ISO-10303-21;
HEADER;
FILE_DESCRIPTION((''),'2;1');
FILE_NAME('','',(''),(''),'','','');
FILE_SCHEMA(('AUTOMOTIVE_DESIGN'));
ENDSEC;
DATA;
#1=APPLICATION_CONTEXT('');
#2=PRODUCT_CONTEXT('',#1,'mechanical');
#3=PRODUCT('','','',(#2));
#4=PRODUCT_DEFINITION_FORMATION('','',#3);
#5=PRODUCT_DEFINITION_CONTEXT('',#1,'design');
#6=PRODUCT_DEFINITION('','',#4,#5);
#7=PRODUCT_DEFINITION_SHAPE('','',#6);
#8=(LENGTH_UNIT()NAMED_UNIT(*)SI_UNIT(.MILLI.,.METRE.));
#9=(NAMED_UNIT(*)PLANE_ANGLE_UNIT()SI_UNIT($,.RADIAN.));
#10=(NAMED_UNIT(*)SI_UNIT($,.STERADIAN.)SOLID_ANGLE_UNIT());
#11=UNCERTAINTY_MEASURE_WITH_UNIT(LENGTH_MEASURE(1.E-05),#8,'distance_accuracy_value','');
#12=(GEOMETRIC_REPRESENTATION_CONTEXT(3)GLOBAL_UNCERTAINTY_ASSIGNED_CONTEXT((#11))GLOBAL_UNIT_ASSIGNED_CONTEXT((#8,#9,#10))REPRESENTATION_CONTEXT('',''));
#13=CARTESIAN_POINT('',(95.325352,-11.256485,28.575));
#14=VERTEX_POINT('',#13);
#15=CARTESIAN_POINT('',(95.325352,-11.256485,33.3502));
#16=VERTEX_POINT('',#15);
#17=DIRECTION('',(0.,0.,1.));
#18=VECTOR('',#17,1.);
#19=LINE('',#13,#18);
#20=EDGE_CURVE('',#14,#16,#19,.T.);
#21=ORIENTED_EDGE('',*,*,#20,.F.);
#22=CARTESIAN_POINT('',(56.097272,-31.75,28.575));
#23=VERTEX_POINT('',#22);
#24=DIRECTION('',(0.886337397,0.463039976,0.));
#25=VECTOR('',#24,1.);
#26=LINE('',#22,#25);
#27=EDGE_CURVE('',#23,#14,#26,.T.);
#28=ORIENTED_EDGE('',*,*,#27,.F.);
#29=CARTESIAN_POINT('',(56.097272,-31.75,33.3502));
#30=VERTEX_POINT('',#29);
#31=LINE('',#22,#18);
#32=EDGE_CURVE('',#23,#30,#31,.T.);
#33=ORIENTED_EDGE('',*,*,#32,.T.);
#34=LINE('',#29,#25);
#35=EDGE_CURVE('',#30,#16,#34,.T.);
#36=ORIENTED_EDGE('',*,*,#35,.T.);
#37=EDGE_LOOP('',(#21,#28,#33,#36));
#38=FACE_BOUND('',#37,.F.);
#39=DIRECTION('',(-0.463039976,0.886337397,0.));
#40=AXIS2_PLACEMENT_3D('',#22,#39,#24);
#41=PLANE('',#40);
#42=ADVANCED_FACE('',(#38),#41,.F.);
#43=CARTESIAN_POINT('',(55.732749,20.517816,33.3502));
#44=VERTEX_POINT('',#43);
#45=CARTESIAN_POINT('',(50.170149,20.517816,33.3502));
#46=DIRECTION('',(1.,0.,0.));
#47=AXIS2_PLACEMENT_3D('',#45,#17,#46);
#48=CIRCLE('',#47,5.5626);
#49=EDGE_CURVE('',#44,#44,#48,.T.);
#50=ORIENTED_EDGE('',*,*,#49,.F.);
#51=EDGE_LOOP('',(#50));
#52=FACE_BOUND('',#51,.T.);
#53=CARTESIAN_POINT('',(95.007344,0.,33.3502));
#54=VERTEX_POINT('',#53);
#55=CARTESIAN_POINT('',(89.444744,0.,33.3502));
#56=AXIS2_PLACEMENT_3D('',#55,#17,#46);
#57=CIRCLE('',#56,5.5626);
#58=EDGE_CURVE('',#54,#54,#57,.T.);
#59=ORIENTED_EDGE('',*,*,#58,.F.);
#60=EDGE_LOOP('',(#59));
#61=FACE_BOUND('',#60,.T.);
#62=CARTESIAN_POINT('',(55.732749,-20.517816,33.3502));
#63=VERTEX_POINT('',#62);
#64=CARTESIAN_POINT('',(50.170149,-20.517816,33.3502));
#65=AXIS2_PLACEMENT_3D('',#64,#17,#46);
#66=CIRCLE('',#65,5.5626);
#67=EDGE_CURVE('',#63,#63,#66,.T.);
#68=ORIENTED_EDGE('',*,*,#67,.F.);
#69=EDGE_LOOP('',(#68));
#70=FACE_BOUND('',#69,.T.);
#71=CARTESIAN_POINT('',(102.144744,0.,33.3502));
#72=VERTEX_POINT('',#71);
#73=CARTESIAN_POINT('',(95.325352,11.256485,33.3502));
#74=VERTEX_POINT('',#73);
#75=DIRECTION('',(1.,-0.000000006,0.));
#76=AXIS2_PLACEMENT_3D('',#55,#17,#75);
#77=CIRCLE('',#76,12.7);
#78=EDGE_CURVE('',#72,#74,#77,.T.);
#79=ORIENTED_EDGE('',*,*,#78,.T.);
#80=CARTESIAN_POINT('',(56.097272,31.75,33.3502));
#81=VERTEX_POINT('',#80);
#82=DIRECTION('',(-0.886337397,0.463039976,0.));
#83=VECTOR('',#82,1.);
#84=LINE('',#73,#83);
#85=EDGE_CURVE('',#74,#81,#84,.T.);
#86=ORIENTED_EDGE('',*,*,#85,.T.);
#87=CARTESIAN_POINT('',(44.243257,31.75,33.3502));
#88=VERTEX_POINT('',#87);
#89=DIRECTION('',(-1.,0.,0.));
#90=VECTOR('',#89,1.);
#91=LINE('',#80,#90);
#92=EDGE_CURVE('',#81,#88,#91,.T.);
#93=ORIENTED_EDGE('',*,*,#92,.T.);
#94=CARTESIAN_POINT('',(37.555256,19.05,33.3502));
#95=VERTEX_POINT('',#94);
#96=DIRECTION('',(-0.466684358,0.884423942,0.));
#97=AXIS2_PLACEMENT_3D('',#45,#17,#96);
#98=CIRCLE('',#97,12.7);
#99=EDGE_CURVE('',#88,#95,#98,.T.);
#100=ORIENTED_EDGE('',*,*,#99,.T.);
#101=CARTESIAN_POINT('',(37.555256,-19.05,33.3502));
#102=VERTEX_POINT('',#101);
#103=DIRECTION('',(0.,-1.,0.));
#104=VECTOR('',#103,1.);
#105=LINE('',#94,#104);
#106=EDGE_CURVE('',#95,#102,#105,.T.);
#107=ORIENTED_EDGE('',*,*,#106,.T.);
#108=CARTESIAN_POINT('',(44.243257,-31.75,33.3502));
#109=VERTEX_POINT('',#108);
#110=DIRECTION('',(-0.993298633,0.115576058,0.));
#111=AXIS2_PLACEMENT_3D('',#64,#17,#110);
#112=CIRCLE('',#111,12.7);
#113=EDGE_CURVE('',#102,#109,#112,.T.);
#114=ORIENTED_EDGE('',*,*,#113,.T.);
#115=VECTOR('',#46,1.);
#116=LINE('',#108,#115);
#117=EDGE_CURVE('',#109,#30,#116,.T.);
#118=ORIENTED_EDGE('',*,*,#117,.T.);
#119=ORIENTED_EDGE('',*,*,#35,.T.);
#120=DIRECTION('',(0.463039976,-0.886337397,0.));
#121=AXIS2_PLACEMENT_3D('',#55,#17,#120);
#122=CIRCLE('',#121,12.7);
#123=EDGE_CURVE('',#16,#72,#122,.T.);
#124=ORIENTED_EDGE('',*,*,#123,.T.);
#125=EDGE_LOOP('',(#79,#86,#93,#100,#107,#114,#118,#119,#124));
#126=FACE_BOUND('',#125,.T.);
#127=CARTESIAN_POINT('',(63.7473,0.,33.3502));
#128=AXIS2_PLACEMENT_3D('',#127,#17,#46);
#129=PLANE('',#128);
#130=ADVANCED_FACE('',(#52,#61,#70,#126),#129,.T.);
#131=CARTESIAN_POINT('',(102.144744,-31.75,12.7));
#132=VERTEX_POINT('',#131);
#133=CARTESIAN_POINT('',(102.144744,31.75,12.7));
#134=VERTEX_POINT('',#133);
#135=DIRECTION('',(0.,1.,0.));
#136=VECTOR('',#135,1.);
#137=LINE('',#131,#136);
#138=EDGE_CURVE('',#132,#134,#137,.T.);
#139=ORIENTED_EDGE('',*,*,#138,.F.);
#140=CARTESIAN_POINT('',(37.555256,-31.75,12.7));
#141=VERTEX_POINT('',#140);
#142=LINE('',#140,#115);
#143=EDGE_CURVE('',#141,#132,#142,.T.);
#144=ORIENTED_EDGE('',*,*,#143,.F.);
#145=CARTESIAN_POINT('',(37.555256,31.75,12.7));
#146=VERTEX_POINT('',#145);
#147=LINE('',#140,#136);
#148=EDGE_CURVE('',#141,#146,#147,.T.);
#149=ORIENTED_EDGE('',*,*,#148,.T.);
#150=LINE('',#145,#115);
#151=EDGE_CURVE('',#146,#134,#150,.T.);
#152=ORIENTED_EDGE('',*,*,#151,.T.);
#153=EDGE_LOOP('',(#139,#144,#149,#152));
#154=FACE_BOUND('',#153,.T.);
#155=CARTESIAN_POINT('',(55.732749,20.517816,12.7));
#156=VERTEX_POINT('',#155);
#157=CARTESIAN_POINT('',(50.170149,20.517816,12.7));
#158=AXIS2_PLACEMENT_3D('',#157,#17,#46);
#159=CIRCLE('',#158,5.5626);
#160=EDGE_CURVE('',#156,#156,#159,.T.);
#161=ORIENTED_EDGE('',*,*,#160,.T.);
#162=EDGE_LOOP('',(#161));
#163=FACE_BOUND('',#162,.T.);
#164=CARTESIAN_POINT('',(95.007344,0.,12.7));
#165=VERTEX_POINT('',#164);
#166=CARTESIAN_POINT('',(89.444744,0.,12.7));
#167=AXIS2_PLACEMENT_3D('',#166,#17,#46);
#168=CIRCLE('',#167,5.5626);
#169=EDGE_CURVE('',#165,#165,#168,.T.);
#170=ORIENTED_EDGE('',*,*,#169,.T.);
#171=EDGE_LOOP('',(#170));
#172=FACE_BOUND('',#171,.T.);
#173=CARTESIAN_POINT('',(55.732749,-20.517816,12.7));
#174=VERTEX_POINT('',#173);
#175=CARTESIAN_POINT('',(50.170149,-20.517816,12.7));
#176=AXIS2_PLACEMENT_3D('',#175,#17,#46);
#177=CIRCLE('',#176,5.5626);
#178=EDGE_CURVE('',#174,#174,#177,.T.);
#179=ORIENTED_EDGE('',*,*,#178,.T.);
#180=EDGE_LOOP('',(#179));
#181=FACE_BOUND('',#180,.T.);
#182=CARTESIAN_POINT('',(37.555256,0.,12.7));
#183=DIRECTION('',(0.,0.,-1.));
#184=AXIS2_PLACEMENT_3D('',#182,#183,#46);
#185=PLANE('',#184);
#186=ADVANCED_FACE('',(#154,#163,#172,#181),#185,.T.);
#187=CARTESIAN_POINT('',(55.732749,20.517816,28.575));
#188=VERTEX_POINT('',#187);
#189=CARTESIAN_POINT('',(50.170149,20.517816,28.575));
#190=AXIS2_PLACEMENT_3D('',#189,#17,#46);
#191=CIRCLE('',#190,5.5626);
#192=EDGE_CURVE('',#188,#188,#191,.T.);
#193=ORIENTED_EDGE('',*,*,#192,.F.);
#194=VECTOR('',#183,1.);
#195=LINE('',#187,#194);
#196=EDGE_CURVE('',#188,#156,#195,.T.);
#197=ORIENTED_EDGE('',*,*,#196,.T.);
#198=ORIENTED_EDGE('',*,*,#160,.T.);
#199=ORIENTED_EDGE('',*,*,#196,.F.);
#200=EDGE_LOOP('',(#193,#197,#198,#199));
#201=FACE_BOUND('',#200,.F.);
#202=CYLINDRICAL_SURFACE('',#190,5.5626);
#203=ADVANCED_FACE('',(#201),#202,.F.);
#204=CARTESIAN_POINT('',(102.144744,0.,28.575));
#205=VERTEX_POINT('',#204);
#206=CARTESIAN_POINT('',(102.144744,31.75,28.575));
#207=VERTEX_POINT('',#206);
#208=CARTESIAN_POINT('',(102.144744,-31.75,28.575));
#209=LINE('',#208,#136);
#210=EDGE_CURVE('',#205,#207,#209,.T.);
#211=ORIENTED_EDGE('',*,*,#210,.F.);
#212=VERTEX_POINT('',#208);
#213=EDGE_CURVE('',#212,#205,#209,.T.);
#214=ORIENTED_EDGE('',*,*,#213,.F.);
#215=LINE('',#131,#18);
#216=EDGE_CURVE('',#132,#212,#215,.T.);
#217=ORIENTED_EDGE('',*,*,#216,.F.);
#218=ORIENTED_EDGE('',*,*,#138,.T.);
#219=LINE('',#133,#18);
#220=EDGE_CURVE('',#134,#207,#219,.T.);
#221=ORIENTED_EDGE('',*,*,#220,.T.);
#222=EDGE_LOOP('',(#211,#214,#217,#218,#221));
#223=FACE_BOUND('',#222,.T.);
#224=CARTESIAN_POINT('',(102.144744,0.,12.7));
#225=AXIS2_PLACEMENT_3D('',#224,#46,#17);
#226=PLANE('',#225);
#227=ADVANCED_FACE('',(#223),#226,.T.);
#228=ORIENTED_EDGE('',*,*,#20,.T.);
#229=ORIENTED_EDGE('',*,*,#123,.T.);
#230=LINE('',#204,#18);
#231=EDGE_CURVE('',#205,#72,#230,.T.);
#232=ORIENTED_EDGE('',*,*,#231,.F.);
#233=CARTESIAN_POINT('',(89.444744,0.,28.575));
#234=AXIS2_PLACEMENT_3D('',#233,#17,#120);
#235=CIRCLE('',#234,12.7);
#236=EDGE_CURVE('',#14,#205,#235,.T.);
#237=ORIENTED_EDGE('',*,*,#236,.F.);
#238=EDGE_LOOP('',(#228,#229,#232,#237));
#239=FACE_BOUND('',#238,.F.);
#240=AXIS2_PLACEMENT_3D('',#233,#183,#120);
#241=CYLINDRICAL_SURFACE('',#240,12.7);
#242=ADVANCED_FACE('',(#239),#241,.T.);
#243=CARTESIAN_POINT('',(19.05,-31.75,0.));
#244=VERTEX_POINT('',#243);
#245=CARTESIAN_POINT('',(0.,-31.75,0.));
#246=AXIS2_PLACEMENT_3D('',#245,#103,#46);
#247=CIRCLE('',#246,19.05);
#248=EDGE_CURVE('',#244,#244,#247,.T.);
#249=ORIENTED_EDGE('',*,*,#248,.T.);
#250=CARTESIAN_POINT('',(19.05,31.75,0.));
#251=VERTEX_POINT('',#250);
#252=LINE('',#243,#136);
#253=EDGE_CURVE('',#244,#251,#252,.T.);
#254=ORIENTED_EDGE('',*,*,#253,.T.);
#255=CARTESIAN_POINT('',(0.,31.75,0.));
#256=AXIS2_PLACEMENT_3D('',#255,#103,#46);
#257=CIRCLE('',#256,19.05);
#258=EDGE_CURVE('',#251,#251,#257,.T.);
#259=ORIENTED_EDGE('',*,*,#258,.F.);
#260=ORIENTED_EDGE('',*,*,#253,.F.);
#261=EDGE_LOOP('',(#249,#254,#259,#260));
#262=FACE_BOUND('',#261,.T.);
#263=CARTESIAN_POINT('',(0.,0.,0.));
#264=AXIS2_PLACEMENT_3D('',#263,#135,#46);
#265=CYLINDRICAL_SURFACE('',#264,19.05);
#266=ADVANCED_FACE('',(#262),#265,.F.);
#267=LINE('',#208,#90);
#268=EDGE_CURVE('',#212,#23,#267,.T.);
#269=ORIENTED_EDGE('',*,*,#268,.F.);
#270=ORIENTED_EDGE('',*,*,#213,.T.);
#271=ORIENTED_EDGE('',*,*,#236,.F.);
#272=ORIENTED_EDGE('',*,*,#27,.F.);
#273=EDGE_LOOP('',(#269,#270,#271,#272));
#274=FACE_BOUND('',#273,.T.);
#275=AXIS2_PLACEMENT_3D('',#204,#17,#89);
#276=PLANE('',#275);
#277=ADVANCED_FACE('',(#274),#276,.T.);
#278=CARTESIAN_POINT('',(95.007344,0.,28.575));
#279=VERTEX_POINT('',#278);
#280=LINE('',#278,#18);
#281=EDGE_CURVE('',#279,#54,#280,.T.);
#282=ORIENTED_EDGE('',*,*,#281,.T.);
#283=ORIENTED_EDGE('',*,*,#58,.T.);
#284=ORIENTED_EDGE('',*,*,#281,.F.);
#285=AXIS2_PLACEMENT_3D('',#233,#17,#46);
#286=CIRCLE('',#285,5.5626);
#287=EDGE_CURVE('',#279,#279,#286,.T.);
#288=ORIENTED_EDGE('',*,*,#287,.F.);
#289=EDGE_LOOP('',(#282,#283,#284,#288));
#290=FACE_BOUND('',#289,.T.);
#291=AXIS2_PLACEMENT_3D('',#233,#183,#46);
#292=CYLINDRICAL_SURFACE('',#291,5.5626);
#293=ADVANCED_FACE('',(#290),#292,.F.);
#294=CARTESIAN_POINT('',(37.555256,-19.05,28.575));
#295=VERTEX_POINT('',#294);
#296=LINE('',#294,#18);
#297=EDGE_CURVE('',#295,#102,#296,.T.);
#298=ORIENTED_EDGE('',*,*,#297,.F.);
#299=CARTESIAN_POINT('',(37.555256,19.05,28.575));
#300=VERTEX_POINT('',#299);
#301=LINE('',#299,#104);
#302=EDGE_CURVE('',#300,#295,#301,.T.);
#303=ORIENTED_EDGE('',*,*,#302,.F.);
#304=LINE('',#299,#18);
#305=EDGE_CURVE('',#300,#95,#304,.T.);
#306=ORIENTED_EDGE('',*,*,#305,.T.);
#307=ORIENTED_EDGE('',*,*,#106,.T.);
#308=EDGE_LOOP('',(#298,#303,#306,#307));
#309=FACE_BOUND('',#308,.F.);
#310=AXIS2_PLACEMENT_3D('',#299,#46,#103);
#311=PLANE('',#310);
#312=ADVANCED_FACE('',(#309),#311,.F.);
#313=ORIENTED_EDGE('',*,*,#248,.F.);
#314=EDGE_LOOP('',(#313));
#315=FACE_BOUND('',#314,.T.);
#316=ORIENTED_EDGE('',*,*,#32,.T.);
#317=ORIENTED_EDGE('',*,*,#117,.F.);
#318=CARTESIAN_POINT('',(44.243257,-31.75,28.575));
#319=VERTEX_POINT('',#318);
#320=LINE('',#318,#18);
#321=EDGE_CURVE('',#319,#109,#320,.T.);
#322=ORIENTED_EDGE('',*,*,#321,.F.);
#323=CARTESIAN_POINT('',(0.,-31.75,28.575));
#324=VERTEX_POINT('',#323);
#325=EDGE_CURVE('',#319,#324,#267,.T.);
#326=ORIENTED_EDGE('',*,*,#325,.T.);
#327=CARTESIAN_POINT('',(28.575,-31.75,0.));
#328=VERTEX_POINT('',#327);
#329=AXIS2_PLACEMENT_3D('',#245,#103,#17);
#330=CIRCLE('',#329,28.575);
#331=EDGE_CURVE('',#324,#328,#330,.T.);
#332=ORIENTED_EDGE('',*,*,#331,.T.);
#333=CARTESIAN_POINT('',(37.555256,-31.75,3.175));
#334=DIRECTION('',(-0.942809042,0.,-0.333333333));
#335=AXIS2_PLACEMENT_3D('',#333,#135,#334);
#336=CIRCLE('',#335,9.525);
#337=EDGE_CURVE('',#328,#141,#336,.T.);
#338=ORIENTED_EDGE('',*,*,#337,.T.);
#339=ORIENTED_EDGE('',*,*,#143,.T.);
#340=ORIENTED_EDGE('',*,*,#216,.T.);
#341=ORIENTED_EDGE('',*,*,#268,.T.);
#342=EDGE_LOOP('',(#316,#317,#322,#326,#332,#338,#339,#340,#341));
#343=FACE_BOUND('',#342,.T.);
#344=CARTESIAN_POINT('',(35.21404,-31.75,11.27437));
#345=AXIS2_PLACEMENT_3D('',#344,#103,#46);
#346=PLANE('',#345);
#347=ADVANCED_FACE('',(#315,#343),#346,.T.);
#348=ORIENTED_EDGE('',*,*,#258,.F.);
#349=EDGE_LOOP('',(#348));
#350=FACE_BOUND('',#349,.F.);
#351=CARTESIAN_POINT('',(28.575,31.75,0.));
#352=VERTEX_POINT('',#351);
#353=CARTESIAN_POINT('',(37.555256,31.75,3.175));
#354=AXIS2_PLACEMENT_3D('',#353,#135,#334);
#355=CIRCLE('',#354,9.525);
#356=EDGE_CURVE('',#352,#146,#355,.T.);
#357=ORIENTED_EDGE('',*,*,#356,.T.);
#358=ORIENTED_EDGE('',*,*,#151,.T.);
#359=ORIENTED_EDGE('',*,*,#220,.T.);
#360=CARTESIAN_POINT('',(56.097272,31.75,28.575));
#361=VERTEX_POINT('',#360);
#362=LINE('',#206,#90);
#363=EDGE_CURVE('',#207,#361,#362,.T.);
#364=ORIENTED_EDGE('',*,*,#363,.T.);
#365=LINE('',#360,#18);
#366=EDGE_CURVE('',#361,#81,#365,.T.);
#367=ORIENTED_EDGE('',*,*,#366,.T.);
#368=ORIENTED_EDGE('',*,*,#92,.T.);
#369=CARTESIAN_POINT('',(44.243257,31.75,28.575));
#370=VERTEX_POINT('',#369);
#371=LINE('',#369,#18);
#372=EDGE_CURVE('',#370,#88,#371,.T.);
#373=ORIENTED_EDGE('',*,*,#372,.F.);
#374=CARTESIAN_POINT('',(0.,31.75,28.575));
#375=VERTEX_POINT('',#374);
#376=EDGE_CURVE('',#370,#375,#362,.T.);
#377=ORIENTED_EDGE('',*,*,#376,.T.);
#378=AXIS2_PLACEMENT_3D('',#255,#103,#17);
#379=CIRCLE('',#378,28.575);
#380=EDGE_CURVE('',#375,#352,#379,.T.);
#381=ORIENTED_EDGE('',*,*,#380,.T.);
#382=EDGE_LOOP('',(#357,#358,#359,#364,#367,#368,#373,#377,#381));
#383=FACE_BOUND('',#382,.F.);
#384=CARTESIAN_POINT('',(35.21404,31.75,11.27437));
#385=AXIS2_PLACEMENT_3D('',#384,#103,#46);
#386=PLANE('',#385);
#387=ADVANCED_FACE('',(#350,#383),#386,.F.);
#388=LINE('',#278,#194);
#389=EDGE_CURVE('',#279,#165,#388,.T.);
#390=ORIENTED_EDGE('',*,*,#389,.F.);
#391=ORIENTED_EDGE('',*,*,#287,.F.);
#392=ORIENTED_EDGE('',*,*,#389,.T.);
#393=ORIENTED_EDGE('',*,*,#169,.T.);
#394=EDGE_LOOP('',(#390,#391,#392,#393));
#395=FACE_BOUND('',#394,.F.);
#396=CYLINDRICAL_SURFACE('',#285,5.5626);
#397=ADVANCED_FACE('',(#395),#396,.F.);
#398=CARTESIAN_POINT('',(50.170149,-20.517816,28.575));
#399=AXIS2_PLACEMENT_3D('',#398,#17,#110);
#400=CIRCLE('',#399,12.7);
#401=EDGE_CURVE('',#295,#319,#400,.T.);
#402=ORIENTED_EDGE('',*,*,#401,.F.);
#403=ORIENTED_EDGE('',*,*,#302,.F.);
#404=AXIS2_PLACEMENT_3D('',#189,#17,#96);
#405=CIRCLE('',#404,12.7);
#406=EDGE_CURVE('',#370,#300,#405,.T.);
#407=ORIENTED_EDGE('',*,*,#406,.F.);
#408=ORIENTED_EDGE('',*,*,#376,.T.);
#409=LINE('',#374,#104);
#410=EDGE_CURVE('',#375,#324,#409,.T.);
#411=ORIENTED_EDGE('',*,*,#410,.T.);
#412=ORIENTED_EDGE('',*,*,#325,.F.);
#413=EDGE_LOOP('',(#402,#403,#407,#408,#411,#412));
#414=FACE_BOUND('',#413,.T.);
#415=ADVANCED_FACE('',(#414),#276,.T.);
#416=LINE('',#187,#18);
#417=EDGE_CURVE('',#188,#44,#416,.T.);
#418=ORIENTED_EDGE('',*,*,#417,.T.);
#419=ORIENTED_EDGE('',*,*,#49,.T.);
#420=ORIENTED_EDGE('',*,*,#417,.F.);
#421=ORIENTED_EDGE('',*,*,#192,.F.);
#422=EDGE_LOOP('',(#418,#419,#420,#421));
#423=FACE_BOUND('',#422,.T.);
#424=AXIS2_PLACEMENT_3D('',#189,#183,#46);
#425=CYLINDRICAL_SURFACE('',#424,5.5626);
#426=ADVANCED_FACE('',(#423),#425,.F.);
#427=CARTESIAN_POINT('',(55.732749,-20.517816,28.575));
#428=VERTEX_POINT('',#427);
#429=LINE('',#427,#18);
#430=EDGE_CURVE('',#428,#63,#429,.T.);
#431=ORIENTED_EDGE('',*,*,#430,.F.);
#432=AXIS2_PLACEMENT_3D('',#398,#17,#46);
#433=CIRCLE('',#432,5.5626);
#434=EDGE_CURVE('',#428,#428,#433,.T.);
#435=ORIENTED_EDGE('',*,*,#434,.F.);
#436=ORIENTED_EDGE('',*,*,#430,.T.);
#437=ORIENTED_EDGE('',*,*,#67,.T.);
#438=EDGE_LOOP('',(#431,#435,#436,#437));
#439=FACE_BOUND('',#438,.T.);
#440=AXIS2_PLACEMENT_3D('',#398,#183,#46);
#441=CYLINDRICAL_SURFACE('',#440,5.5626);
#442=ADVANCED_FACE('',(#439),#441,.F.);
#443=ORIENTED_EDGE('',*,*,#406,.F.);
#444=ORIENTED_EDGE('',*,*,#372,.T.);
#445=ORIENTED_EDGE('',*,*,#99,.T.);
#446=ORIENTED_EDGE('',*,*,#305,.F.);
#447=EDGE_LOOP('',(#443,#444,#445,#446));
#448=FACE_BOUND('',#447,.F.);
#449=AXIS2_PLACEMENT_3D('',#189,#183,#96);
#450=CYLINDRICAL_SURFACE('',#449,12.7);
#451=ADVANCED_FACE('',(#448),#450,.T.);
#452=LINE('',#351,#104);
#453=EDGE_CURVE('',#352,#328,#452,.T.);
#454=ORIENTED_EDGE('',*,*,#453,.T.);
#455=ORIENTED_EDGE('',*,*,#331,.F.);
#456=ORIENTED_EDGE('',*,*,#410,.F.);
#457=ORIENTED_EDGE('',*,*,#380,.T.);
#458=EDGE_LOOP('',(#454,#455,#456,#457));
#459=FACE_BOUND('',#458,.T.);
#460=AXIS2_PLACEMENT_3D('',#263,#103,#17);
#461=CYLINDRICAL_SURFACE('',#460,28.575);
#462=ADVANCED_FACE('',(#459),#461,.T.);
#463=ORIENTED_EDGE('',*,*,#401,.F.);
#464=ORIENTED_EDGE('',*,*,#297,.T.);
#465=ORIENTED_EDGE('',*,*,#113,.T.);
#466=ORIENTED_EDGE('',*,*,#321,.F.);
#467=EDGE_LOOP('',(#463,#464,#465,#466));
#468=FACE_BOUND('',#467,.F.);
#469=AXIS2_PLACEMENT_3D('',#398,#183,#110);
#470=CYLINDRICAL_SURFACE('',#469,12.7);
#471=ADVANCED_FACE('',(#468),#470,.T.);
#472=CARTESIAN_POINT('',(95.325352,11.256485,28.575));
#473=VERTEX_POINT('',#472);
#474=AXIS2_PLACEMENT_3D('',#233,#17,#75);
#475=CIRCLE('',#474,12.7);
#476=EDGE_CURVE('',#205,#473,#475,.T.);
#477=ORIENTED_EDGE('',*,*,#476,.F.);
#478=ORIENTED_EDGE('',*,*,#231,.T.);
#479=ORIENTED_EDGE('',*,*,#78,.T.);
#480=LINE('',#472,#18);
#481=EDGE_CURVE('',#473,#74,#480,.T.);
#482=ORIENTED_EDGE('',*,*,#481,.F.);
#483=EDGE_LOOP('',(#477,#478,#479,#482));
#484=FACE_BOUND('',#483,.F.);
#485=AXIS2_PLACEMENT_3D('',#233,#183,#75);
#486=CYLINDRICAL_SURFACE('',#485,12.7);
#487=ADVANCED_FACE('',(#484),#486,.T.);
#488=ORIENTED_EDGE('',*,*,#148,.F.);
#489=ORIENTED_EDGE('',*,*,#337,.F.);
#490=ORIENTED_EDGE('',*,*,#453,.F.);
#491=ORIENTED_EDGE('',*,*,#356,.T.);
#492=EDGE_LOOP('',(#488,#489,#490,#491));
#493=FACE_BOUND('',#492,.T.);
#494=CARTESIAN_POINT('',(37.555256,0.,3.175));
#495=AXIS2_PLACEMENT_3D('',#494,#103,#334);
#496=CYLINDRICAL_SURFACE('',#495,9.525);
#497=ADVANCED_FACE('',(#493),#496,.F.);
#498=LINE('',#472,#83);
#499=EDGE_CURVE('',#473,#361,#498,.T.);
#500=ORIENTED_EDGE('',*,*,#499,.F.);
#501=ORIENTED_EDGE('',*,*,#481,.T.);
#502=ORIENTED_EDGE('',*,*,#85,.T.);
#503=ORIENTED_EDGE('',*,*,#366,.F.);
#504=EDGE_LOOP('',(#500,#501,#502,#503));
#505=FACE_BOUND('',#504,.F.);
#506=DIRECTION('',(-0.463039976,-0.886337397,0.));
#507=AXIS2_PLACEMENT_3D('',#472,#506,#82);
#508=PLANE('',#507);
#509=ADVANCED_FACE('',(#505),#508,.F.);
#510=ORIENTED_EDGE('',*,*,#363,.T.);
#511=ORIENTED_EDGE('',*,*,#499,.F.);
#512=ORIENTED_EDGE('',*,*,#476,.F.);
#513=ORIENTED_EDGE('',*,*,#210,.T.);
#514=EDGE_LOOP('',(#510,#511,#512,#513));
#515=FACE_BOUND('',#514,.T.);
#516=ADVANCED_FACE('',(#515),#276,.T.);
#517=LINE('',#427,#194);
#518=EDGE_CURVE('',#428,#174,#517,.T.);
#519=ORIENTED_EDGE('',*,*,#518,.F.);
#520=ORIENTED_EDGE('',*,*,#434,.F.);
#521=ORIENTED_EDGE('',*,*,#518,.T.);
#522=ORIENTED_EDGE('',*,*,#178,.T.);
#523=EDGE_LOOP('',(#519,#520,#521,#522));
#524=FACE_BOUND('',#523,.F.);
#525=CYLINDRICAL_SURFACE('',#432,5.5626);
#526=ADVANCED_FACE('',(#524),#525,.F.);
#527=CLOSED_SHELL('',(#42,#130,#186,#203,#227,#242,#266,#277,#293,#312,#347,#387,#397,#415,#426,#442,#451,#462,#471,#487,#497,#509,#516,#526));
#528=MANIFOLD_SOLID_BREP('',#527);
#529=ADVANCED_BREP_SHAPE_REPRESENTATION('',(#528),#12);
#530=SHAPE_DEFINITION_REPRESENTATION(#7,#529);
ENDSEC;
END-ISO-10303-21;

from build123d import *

# Parameters (mm, degrees)
F0_R     = 19.05
F1_DEPTH = 31.75
F3_R     = 5.5626
F4_DEPTH = 4.7752
F5_DEPTH = 57.151


with BuildPart() as f1:
    # F0 (on Front) → F1 (new body, symmetric)
    with BuildSketch(Plane.XZ):
        with BuildLine():
            Line((102.1447438789, 28.575), (0, 28.575))
            ThreePointArc((0, 28.575), (-20.2055762724, -20.2055762724), (28.575, 0))
            ThreePointArc((28.575, 0), (29.7781261877, 8.674261314), (37.5552561211, 12.7))
            Line((37.5552561211, 12.7), (102.1447438789, 12.7))
            Line((102.1447438789, 12.7), (102.1447438789, 28.575))
        make_face()
        Circle(F0_R, mode=Mode.SUBTRACT)
    extrude(amount=F1_DEPTH, both=True)

    # F3 (on face) → F4 (join)
    with BuildSketch(Plane.XY.offset(28.575)):
        with BuildLine():
            ThreePointArc((44.2432574162, 31.75), (38.9330700337, 26.4354220023), (37.5552561211, 19.05))
            Line((37.5552561211, 19.05), (37.5552561211, -19.05))
            ThreePointArc((37.5552561211, -19.05), (38.9330700337, -26.4354220023), (44.2432574161, -31.75))
            Line((44.2432574161, -31.75), (56.097272461, -31.75))
            Line((56.097272461, -31.75), (95.3253515684, -11.2564849399))
            ThreePointArc((95.3253515684, -11.2564849399), (100.3069194614, -6.5805122609), (102.1447438789, -7.87e-08))
            ThreePointArc((102.1447438789, -7.87e-08), (100.3069195022, 6.5805121935), (95.3253515684, 11.2564849399))
            Line((95.3253515684, 11.2564849399), (56.097272461, 31.75))
            Line((56.097272461, 31.75), (44.2432574162, 31.75))
        make_face()
        with Locations((50.170148764, -20.5178159314)):
            Circle(F3_R, mode=Mode.SUBTRACT)
        with Locations((50.170148764, 20.5178159314)):
            Circle(F3_R, mode=Mode.SUBTRACT)
        with Locations((89.4447438789, 0)):
            Circle(F3_R, mode=Mode.SUBTRACT)
    extrude(amount=F4_DEPTH)

    # F5 (cut, through all): faces of the model
    f5_faces = [f1.faces().sort_by_distance(p)[0] for p in [
        (89.4447438789, 0, 28.575),
        (50.170148764, -20.5178159314, 28.575),
        (50.170148764, 20.5178159314, 28.575),
    ]]
    extrude(f5_faces, amount=-F5_DEPTH, mode=Mode.SUBTRACT)


solid = f1.part
